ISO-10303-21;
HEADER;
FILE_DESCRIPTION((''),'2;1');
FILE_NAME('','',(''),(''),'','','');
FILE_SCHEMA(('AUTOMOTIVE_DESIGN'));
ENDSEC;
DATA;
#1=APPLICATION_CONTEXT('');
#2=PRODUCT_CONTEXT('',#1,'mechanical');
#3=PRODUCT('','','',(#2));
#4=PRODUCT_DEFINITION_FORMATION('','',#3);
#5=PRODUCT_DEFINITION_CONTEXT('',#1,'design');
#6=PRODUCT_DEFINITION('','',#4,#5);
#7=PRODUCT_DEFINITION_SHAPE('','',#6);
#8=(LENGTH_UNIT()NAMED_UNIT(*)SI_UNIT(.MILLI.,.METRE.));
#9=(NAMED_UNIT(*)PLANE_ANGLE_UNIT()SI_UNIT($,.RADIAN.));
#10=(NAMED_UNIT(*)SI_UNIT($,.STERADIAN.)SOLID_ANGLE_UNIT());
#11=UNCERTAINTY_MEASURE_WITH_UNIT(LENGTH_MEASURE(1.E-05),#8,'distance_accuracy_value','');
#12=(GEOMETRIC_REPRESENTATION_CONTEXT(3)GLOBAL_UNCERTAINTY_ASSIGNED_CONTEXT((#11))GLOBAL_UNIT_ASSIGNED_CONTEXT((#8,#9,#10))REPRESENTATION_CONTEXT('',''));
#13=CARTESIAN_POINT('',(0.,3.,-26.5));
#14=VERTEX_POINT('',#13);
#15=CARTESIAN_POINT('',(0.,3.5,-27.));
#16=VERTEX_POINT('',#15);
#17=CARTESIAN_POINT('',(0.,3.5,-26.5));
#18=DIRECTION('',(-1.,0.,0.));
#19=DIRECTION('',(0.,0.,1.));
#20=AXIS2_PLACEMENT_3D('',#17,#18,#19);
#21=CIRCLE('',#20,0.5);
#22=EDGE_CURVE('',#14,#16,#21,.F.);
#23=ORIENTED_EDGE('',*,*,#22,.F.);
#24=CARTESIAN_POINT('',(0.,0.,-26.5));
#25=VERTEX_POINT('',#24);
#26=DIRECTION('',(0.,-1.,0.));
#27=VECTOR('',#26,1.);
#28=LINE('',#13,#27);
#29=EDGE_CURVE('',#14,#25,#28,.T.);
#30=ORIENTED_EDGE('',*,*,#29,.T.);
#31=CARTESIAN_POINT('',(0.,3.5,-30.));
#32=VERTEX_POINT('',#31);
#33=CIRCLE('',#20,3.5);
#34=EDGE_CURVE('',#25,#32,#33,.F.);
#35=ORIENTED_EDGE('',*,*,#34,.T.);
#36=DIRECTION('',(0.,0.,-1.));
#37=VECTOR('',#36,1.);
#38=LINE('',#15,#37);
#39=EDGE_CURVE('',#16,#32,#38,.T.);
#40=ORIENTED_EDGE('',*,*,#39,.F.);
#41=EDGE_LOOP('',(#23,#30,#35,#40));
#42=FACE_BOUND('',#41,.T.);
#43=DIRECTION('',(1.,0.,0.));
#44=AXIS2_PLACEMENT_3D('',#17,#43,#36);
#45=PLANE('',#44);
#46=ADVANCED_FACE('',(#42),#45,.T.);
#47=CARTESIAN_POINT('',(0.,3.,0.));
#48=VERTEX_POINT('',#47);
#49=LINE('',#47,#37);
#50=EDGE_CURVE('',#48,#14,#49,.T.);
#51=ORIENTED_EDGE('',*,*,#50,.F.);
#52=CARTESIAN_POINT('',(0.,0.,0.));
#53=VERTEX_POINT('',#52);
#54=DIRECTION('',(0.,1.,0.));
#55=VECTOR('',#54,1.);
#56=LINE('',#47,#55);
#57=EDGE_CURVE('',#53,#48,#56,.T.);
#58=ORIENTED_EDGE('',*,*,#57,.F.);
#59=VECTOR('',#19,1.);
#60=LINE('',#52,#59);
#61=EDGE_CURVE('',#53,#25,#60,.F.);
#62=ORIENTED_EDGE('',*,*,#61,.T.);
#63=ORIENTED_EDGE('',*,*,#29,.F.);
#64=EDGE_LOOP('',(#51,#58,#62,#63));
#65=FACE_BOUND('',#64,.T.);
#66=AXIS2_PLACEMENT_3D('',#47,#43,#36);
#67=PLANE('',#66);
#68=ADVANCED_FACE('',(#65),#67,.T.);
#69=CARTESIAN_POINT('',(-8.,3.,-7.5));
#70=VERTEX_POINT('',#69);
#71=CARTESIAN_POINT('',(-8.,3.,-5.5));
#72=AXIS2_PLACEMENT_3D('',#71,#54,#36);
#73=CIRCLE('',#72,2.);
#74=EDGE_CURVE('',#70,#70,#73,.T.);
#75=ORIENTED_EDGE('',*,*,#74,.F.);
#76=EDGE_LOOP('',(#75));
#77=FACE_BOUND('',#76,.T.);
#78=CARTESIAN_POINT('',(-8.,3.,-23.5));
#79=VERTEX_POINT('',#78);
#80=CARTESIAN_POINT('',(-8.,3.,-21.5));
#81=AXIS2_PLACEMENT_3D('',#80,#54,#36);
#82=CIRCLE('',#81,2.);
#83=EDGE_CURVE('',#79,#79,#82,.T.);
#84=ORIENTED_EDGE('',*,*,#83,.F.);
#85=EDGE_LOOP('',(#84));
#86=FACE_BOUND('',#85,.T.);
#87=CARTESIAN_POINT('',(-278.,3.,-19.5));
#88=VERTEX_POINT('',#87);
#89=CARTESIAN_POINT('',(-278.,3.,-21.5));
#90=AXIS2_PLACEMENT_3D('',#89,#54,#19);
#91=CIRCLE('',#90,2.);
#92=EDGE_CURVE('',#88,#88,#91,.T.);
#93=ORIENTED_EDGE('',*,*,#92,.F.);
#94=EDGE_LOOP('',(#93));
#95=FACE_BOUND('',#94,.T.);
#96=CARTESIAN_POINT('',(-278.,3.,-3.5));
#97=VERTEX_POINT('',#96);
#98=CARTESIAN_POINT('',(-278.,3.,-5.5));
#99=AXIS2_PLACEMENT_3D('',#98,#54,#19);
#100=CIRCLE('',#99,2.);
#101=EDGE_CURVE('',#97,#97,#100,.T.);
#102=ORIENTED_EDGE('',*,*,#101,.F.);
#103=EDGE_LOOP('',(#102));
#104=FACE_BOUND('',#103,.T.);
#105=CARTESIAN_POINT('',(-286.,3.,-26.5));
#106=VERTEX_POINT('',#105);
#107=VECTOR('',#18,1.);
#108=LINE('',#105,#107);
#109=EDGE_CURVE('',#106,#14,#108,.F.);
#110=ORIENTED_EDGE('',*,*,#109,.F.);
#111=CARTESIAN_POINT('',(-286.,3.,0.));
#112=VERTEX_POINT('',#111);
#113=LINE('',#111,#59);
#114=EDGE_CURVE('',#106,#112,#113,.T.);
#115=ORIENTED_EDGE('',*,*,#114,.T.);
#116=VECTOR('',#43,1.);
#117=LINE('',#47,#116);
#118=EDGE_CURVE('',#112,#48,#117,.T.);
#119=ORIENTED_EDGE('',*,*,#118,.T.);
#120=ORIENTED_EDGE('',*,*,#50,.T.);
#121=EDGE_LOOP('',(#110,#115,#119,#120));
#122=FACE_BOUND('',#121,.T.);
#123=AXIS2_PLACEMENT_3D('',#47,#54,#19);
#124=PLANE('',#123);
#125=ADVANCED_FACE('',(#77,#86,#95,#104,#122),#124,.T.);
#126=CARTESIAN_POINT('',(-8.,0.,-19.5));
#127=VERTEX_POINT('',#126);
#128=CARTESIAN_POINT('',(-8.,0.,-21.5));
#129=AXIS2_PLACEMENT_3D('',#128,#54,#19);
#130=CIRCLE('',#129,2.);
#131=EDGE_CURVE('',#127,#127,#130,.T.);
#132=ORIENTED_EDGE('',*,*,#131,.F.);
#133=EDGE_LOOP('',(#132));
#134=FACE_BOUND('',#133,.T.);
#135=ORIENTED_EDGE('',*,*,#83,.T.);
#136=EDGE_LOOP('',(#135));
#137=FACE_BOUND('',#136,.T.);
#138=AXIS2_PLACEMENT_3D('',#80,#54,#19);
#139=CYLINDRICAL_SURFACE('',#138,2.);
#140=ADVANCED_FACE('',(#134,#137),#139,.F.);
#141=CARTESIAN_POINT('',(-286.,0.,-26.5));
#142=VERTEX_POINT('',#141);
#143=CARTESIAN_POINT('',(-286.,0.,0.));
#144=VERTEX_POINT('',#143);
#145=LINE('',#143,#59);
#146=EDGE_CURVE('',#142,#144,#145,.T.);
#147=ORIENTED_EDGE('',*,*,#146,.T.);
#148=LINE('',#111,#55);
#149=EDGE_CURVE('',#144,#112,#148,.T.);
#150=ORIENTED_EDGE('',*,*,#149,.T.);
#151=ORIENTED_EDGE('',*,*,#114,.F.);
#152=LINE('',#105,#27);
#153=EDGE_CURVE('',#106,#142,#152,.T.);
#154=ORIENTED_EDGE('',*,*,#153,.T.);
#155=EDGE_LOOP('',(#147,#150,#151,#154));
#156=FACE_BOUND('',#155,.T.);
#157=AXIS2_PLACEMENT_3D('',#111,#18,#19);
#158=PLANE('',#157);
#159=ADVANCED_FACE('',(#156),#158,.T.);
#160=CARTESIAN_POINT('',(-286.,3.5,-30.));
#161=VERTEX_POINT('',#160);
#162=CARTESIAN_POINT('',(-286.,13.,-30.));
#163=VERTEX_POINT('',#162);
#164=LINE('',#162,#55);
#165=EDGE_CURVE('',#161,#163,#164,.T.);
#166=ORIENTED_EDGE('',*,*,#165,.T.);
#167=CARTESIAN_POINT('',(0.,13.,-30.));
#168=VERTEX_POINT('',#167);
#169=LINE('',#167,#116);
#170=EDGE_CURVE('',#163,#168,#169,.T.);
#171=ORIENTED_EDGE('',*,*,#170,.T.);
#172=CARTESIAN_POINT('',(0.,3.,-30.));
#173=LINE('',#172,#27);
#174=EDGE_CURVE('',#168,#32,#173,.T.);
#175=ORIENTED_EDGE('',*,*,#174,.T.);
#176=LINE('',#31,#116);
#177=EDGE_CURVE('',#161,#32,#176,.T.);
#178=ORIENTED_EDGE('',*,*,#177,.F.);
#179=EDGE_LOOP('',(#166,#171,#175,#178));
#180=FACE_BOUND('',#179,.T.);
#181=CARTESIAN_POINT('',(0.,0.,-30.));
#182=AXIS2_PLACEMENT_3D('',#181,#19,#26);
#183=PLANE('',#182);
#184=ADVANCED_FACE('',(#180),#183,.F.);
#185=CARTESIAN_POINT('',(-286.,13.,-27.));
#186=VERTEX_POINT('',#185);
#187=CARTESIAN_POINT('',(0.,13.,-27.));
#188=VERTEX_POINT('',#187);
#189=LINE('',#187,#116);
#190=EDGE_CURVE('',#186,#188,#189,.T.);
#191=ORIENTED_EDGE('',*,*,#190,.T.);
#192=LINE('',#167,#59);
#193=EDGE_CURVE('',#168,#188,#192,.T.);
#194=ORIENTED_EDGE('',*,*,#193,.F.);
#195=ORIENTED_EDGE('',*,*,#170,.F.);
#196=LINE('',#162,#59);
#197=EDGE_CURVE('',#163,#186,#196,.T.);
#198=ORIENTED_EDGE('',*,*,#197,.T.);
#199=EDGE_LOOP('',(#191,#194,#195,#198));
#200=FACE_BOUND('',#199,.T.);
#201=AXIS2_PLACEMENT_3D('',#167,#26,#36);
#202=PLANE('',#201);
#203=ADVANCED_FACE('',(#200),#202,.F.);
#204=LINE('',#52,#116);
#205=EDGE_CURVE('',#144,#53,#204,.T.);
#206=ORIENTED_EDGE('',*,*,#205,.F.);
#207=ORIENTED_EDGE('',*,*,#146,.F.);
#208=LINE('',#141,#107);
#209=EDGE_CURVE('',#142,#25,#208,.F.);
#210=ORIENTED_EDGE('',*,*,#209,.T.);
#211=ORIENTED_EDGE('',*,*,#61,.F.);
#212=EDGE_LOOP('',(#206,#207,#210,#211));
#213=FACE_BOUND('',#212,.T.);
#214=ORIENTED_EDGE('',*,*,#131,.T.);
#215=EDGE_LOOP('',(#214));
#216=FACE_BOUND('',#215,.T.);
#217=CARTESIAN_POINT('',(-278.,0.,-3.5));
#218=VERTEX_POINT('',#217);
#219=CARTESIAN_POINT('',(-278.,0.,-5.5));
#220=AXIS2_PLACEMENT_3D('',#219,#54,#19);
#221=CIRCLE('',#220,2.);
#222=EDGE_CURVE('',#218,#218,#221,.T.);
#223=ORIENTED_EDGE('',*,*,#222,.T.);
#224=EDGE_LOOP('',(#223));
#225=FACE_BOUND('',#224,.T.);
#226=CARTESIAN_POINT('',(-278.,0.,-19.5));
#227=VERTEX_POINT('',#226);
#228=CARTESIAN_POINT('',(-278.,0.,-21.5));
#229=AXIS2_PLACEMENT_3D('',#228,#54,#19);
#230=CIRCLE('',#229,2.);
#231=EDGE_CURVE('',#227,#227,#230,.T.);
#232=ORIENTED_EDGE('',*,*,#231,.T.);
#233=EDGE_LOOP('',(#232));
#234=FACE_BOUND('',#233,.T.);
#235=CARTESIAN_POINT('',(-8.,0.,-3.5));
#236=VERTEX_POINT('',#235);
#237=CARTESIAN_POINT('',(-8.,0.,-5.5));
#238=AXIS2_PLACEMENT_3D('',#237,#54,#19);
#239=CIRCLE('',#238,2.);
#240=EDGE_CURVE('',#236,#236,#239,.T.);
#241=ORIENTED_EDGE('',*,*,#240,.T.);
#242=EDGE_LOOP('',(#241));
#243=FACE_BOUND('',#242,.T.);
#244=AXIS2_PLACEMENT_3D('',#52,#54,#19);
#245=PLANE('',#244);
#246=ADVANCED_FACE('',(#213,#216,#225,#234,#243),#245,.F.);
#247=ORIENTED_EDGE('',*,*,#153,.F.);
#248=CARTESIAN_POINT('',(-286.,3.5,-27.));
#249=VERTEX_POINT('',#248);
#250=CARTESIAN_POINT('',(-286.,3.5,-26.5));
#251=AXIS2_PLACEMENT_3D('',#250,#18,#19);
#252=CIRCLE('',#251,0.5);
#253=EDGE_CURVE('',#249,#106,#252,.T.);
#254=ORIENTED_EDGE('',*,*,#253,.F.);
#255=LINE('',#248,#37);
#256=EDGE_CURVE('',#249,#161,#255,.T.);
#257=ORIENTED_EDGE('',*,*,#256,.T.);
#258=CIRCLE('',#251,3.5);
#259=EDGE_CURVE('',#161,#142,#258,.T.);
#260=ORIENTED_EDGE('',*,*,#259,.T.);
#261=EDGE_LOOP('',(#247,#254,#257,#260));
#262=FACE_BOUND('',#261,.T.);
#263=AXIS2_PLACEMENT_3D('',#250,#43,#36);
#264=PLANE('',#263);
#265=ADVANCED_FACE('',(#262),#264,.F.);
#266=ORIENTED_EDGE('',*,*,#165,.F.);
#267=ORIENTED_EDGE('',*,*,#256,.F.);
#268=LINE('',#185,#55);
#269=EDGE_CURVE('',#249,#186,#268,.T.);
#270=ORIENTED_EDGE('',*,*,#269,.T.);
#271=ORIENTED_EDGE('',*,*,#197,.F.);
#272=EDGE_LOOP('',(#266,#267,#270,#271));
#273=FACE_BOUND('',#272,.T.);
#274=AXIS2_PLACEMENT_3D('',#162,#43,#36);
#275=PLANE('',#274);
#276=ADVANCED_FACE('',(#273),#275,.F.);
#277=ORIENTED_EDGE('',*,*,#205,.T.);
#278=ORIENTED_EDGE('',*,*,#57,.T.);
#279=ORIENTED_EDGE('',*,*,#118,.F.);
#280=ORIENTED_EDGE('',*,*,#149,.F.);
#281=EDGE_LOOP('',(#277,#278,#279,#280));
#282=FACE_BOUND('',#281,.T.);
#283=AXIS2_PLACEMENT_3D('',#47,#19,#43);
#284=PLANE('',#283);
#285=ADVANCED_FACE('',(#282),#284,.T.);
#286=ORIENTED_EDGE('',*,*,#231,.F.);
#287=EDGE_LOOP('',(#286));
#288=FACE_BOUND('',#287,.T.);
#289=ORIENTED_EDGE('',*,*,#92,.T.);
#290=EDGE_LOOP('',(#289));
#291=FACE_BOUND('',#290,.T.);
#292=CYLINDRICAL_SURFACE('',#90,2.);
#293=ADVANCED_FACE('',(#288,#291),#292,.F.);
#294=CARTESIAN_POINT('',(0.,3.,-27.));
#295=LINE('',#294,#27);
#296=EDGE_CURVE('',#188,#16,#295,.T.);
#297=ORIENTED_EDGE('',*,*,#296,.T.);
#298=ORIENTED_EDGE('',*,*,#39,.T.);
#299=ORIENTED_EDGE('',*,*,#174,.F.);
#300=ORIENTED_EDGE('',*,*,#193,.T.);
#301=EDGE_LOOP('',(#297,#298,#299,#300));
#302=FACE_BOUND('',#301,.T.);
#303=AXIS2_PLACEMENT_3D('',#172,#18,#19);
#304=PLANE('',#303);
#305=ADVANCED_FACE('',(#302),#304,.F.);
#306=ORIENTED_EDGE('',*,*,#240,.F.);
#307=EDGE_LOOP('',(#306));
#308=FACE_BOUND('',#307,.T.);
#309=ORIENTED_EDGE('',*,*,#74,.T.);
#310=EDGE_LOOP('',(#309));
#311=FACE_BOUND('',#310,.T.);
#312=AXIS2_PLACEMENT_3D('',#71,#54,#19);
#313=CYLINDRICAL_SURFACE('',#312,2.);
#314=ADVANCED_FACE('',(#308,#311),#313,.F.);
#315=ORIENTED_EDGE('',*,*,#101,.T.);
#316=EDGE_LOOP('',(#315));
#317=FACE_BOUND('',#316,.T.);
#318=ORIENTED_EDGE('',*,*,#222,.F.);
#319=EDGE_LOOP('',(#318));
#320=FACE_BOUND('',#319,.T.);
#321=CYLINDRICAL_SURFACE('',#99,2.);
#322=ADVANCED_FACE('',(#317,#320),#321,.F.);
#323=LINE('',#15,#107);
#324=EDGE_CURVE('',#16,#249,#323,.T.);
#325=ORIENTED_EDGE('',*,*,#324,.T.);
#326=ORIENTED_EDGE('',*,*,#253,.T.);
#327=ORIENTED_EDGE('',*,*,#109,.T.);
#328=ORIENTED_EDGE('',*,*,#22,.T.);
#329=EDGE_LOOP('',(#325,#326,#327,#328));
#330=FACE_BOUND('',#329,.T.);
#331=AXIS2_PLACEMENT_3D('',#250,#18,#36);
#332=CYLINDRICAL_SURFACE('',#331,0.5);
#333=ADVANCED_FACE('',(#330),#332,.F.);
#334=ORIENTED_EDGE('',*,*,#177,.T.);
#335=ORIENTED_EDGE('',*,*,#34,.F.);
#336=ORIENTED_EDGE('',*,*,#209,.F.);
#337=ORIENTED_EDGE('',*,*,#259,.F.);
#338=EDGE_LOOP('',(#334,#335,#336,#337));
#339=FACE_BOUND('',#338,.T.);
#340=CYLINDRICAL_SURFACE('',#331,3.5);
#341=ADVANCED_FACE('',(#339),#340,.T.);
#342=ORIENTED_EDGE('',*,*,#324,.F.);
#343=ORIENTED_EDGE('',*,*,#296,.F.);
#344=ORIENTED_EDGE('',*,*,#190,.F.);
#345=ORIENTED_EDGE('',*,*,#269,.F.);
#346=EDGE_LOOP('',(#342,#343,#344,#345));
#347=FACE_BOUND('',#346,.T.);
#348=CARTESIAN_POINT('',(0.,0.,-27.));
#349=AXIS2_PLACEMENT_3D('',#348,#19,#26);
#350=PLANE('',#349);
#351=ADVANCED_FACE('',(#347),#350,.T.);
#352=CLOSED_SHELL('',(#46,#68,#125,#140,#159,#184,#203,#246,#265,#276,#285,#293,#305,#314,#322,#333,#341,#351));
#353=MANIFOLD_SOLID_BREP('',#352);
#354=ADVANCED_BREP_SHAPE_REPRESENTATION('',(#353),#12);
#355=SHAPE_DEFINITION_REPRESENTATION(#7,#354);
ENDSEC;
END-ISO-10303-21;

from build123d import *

# Parameters (mm, degrees)
SKETCH1_W                    = 286
SKETCH1_H                    = 27
SKETCH1_R                    = 2
BOSS_EXTRUDE1_DEPTH          = 3
EDGE_FLANGE3_STRIP_W         = 13
EDGE_FLANGE3_STRIP_H         = 3
EDGE_FLANGE3_STRIP_CUT_DEPTH = 286
EDGE_FLANGE3_DEPTH           = 286


# Sheet-metal steps are written as plain solids
with BuildPart() as part:
    # Sketch1 → Boss-Extrude1 (new body)
    with BuildSketch(Plane(origin=(0, 0, 0), x_dir=(1, 0, 0), z_dir=(0, 1, 0))):
        with Locations((-143, 13.5)):
            Rectangle(SKETCH1_W, SKETCH1_H)
        with Locations(Location((-278, 21.5, 0), (0, 0, 270))):
            Circle(SKETCH1_R, mode=Mode.SUBTRACT)
        with Locations(Location((-278, 5.5, 0), (0, 0, 270))):
            Circle(SKETCH1_R, mode=Mode.SUBTRACT)
        with Locations(Location((-8, 21.5, 0), (0, 0, 90))):
            Circle(SKETCH1_R, mode=Mode.SUBTRACT)
        with Locations(Location((-8, 5.5, 0), (0, 0, 90))):
            Circle(SKETCH1_R, mode=Mode.SUBTRACT)
    extrude(amount=BOSS_EXTRUDE1_DEPTH)

    # Edge-Flange3 strip (across the edge) → Edge-Flange3 strip cut (cut)
    with BuildSketch(Plane(origin=(0, 3, -27), x_dir=(0, 0, 1), z_dir=(-1, 0, 0))):
        with Locations((-6, -1.5)):
            Rectangle(EDGE_FLANGE3_STRIP_W, EDGE_FLANGE3_STRIP_H)
    extrude(amount=EDGE_FLANGE3_STRIP_CUT_DEPTH, mode=Mode.SUBTRACT)

    # Edge-Flange3 section (across the edge) → Edge-Flange3 (add)
    with BuildSketch(Plane(origin=(0, 3, -27), x_dir=(0, 0, 1), z_dir=(-1, 0, 0))):
        with BuildLine():
            Line((-3, 0.5), (-3, 10))
            Line((-3, 10), (0, 10))
            Line((0, 10), (0, 0.5))
            ThreePointArc((0, 0.5), (0.146446609, 0.146446609), (0.5, 0))
            Line((0.5, 0), (0.5, -3))
            ThreePointArc((0.5, -3), (-1.974873734, -1.974873734), (-3, 0.5))
        make_face()
    extrude(amount=EDGE_FLANGE3_DEPTH)


solid = part.part
